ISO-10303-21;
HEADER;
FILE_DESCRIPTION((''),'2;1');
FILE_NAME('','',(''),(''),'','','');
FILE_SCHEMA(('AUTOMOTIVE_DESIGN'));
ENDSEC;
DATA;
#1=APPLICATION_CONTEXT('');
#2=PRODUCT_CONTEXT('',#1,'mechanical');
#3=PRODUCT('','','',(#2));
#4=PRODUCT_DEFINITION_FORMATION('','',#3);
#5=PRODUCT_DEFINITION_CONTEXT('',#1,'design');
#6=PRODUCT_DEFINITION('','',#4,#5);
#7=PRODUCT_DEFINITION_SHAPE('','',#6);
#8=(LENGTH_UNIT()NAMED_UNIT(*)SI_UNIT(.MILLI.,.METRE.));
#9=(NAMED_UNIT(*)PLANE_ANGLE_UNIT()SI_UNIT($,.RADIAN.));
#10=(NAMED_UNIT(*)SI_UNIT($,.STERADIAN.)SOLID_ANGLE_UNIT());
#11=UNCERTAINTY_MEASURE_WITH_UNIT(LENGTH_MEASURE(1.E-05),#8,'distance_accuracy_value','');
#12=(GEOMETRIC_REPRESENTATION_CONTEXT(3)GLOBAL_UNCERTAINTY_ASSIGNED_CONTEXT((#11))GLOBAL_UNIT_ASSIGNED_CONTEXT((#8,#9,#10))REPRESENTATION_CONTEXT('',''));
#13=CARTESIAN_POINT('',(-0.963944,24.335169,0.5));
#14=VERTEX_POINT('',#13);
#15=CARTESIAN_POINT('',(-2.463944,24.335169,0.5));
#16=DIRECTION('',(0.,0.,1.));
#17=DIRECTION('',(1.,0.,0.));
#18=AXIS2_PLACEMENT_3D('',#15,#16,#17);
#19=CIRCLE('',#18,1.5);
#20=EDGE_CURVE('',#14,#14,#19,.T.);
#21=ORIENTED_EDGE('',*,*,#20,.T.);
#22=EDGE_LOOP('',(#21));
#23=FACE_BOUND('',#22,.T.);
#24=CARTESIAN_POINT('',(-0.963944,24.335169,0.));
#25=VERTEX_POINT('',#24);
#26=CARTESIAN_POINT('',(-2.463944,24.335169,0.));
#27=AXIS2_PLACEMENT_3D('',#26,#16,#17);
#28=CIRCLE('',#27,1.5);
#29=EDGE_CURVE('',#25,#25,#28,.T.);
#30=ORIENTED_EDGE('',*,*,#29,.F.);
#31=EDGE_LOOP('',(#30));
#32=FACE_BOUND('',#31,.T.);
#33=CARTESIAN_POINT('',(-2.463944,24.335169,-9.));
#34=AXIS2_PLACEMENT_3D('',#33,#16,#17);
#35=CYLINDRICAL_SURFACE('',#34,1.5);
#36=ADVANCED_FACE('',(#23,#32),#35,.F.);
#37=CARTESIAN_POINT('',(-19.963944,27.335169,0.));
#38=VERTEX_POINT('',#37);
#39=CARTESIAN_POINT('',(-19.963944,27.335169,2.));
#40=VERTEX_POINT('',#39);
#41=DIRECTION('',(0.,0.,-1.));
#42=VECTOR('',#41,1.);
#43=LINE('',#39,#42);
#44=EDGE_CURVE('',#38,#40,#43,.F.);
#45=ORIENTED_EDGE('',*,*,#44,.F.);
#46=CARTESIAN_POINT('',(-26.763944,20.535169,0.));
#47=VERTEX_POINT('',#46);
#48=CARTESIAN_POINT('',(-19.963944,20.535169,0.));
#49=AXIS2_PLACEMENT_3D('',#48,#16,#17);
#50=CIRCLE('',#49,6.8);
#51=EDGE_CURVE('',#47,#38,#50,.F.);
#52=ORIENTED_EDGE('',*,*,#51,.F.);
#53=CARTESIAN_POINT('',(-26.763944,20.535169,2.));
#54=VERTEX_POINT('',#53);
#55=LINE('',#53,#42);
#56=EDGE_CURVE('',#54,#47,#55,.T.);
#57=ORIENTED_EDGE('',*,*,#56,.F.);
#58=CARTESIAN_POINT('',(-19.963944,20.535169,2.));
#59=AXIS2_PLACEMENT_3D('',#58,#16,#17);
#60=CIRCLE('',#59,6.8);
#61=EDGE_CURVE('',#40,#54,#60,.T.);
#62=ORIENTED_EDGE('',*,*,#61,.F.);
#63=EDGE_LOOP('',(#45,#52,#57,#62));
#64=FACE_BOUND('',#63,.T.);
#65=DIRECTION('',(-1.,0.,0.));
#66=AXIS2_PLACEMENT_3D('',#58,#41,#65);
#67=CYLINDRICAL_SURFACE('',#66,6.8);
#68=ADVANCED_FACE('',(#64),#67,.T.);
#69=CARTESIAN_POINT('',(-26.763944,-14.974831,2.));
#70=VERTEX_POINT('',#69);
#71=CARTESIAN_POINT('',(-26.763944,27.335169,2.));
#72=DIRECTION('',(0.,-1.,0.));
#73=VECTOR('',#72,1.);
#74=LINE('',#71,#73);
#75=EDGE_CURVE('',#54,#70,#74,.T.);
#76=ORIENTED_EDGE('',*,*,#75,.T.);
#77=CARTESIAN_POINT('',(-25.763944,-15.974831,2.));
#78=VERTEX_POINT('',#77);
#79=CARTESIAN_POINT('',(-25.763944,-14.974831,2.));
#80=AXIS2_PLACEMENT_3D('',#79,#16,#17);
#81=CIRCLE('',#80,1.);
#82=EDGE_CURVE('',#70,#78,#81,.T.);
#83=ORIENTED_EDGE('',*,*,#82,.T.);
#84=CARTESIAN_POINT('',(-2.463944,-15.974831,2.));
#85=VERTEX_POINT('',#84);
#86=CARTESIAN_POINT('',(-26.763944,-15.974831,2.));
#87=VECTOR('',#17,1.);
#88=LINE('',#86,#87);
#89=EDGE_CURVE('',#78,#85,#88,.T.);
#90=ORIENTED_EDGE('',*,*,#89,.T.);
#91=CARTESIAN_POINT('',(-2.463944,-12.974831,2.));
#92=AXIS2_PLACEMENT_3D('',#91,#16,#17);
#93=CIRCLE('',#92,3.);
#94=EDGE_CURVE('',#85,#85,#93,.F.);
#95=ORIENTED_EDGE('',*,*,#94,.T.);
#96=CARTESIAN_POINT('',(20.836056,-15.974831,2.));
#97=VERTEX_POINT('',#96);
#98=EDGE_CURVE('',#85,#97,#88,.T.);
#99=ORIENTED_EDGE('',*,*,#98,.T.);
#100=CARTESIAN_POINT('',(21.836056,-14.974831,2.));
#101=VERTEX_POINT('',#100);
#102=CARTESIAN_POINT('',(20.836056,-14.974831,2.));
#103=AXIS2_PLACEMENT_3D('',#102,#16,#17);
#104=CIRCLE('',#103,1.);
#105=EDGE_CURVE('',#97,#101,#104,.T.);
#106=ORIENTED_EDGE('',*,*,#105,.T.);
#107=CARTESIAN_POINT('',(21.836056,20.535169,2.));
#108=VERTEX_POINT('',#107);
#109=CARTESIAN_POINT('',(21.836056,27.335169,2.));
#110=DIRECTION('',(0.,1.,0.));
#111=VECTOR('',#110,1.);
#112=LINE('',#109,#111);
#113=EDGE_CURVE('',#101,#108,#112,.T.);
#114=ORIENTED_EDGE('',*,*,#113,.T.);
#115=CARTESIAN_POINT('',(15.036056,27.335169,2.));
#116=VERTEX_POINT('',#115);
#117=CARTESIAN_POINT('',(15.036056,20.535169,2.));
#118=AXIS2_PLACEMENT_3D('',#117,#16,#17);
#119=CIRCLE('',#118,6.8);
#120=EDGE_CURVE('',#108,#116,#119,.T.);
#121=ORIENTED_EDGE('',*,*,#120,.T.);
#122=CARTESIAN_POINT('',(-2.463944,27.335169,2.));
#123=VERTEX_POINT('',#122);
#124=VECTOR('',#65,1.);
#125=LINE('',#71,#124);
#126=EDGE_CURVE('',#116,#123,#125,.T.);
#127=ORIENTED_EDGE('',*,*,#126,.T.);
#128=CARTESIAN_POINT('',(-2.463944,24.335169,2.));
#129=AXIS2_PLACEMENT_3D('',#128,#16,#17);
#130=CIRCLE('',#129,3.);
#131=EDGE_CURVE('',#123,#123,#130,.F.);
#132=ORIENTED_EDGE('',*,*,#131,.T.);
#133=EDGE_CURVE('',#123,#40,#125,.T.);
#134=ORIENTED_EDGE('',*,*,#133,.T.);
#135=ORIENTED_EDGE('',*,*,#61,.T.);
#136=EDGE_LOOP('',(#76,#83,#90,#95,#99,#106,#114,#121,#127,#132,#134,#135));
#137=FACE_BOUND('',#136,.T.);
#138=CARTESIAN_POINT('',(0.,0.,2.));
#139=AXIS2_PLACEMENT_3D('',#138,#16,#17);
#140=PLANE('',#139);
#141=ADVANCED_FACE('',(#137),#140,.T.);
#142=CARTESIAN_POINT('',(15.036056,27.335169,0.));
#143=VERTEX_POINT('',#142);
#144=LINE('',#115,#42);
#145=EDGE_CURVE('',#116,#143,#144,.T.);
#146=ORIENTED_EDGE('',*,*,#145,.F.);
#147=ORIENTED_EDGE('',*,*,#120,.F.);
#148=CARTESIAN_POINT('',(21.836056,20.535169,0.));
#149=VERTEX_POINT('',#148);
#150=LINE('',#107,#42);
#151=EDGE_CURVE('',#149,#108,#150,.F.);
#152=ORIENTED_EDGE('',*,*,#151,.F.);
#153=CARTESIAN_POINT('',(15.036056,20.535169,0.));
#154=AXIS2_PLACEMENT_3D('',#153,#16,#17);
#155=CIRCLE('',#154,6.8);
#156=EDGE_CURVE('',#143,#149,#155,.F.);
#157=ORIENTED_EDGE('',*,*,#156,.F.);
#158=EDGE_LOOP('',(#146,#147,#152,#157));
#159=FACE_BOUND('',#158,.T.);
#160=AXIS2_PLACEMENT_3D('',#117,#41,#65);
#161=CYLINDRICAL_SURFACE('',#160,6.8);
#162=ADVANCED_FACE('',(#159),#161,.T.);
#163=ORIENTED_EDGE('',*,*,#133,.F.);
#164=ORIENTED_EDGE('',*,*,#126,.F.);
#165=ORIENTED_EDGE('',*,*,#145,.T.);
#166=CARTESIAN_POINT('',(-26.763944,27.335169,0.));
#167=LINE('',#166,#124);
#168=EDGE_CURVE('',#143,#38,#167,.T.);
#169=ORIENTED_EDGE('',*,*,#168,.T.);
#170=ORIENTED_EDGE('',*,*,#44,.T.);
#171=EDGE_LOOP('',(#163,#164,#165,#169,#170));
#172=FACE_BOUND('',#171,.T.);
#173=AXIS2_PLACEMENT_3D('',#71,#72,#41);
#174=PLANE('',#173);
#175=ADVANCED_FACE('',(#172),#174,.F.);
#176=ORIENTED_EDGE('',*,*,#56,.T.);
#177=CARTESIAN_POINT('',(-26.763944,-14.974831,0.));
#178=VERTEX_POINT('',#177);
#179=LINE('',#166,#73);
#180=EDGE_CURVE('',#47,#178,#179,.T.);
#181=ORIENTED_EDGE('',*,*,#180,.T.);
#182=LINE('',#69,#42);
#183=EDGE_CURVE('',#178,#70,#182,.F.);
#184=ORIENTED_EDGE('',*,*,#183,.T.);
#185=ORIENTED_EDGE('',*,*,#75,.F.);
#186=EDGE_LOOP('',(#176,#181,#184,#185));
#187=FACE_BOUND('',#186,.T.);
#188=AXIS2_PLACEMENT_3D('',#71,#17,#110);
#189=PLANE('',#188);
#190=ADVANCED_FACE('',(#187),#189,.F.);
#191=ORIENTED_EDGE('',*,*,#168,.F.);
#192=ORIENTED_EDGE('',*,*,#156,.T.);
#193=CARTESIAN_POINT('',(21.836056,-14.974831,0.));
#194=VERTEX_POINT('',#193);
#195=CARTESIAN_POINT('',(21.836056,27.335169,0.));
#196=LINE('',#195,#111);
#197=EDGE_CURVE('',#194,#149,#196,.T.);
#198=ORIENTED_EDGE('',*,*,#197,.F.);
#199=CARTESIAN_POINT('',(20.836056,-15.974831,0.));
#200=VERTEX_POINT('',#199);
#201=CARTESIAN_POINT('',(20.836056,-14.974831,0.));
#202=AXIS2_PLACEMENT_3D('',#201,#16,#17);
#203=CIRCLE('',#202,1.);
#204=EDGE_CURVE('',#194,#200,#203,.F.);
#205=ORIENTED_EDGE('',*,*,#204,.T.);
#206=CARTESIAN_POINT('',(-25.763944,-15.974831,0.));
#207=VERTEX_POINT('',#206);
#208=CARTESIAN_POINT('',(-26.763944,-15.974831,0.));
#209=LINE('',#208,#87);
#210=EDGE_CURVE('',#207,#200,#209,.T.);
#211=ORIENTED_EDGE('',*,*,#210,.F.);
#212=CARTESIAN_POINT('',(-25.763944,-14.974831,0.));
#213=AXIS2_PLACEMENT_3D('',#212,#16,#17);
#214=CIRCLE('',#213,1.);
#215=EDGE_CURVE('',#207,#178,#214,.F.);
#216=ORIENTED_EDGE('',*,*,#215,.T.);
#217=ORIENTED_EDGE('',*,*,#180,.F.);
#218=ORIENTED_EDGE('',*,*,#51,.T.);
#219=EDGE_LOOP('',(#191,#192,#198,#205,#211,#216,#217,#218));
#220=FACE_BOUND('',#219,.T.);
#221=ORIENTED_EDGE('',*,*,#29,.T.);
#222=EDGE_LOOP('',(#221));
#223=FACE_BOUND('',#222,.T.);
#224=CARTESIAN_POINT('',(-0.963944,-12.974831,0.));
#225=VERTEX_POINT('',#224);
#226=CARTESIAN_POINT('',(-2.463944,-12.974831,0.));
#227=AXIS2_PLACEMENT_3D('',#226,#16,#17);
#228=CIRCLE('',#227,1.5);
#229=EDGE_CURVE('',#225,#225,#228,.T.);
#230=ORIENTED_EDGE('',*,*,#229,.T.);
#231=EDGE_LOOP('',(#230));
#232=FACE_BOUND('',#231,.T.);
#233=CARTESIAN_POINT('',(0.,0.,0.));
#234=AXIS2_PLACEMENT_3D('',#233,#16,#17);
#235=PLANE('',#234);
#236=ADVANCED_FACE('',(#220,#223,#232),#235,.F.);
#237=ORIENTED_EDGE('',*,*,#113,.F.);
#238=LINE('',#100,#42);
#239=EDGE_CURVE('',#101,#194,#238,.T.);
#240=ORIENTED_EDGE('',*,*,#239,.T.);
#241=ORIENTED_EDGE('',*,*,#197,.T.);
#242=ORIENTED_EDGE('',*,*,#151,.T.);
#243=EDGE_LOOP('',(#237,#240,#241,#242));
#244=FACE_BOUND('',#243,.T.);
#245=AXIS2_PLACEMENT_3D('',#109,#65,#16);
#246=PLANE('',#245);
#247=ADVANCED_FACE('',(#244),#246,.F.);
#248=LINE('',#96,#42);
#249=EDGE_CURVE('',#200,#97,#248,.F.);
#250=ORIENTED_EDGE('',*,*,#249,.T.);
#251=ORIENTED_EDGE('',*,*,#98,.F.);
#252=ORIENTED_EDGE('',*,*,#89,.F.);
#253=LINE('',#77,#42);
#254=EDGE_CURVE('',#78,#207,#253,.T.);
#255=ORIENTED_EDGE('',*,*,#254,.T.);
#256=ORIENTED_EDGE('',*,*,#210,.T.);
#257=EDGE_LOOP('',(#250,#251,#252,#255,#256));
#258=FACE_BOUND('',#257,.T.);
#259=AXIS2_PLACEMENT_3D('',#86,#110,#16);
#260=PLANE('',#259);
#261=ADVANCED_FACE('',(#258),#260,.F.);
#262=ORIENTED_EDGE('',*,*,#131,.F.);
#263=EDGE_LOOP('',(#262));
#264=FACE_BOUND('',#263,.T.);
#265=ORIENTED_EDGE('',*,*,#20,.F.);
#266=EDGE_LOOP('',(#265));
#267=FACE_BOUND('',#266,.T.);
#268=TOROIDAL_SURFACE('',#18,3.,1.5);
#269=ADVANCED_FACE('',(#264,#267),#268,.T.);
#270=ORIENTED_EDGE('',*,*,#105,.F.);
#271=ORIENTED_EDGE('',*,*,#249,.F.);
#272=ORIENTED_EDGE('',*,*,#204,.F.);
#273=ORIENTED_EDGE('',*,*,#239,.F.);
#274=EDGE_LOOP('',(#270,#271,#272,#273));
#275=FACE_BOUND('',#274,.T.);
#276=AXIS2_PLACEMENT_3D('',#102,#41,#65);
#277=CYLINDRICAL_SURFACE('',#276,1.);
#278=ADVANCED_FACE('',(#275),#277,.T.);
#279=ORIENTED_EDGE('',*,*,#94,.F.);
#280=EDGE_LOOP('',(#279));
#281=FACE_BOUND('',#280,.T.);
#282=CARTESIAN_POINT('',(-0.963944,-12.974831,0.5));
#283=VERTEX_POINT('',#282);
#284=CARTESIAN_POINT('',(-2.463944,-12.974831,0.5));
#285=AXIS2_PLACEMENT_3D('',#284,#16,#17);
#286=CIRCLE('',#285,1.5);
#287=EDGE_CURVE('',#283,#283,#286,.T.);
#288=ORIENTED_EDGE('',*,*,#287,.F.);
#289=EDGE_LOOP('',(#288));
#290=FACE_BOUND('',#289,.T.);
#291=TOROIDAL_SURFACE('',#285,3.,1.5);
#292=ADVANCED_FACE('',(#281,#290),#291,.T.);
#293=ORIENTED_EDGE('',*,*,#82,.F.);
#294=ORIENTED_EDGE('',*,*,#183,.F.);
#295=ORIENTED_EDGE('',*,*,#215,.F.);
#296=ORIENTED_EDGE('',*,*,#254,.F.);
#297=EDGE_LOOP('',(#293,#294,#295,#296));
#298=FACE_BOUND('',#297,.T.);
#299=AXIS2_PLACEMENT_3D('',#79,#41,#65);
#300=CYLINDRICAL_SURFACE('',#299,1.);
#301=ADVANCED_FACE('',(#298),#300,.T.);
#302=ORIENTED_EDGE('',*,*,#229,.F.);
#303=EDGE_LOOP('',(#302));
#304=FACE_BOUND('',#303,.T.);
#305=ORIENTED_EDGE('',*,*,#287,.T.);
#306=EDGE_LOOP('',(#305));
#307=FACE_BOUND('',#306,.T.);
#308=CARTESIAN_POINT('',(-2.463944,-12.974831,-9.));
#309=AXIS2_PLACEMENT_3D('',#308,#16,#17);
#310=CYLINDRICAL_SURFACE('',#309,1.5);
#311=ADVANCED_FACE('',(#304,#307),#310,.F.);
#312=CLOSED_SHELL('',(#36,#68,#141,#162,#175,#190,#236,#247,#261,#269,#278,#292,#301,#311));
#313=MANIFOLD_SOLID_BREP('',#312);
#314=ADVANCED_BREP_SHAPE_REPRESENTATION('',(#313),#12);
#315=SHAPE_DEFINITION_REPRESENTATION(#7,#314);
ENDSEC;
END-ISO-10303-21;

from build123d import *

# Parameters (mm, degrees)
SKIZZE2_W                       = 48.6
SKIZZE2_H                       = 43.31
AUFSATZ_LINEAR_AUSTRAGEN1_DEPTH = 2
VERRUNDUNG1_R                   = 6.8
VERRUNDUNG2_R                   = 1
SKIZZE4_R                       = 1.5
SCHNITT_LINEAR_AUSTRAGEN1_DEPTH = 11
VERRUNDUNG3_R                   = 1.5
VERRUNDUNG4_R                   = 1.5


with BuildPart() as part:
    # Skizze2 → Aufsatz-Linear austragen1 (new body)
    with BuildSketch(Plane.XY):
        with Locations((-2.463944442, 5.680169492)):
            Rectangle(SKIZZE2_W, SKIZZE2_H)
    extrude(amount=AUFSATZ_LINEAR_AUSTRAGEN1_DEPTH)

    # Verrundung1
    verrundung1_edges = [part.edges().sort_by_distance(p)[0] for p in [
        (-26.763944442, 27.335169492, 1),
        (21.836055558, 27.335169492, 1),
    ]]
    fillet(verrundung1_edges, radius=VERRUNDUNG1_R)

    # Verrundung2
    verrundung2_edges = [part.edges().sort_by_distance(p)[0] for p in [
        (21.836055558, -15.974830508, 1),
        (-26.763944442, -15.974830508, 1),
    ]]
    fillet(verrundung2_edges, radius=VERRUNDUNG2_R)

    # Skizze4 → Schnitt-Linear austragen1 (cut)
    with BuildSketch(Plane.XY.offset(2)):
        with Locations((-2.463944442, 24.335169492)):
            Circle(SKIZZE4_R)
        with Locations((-2.463944442, -12.974830508)):
            Circle(SKIZZE4_R)
    extrude(amount=-SCHNITT_LINEAR_AUSTRAGEN1_DEPTH, mode=Mode.SUBTRACT)

    # Verrundung3
    verrundung3_edges = [part.edges().sort_by_distance(p)[0] for p in [
        (-3.963944442, 24.335169492, 2),
    ]]
    fillet(verrundung3_edges, radius=VERRUNDUNG3_R - 0.0001)  # a hair under: the kernel refuses the full size

    # Verrundung4
    verrundung4_edges = [part.edges().sort_by_distance(p)[0] for p in [
        (-3.963944442, -12.974830508, 2),
    ]]
    fillet(verrundung4_edges, radius=VERRUNDUNG4_R - 0.0001)  # a hair under: the kernel refuses the full size


solid = part.part
